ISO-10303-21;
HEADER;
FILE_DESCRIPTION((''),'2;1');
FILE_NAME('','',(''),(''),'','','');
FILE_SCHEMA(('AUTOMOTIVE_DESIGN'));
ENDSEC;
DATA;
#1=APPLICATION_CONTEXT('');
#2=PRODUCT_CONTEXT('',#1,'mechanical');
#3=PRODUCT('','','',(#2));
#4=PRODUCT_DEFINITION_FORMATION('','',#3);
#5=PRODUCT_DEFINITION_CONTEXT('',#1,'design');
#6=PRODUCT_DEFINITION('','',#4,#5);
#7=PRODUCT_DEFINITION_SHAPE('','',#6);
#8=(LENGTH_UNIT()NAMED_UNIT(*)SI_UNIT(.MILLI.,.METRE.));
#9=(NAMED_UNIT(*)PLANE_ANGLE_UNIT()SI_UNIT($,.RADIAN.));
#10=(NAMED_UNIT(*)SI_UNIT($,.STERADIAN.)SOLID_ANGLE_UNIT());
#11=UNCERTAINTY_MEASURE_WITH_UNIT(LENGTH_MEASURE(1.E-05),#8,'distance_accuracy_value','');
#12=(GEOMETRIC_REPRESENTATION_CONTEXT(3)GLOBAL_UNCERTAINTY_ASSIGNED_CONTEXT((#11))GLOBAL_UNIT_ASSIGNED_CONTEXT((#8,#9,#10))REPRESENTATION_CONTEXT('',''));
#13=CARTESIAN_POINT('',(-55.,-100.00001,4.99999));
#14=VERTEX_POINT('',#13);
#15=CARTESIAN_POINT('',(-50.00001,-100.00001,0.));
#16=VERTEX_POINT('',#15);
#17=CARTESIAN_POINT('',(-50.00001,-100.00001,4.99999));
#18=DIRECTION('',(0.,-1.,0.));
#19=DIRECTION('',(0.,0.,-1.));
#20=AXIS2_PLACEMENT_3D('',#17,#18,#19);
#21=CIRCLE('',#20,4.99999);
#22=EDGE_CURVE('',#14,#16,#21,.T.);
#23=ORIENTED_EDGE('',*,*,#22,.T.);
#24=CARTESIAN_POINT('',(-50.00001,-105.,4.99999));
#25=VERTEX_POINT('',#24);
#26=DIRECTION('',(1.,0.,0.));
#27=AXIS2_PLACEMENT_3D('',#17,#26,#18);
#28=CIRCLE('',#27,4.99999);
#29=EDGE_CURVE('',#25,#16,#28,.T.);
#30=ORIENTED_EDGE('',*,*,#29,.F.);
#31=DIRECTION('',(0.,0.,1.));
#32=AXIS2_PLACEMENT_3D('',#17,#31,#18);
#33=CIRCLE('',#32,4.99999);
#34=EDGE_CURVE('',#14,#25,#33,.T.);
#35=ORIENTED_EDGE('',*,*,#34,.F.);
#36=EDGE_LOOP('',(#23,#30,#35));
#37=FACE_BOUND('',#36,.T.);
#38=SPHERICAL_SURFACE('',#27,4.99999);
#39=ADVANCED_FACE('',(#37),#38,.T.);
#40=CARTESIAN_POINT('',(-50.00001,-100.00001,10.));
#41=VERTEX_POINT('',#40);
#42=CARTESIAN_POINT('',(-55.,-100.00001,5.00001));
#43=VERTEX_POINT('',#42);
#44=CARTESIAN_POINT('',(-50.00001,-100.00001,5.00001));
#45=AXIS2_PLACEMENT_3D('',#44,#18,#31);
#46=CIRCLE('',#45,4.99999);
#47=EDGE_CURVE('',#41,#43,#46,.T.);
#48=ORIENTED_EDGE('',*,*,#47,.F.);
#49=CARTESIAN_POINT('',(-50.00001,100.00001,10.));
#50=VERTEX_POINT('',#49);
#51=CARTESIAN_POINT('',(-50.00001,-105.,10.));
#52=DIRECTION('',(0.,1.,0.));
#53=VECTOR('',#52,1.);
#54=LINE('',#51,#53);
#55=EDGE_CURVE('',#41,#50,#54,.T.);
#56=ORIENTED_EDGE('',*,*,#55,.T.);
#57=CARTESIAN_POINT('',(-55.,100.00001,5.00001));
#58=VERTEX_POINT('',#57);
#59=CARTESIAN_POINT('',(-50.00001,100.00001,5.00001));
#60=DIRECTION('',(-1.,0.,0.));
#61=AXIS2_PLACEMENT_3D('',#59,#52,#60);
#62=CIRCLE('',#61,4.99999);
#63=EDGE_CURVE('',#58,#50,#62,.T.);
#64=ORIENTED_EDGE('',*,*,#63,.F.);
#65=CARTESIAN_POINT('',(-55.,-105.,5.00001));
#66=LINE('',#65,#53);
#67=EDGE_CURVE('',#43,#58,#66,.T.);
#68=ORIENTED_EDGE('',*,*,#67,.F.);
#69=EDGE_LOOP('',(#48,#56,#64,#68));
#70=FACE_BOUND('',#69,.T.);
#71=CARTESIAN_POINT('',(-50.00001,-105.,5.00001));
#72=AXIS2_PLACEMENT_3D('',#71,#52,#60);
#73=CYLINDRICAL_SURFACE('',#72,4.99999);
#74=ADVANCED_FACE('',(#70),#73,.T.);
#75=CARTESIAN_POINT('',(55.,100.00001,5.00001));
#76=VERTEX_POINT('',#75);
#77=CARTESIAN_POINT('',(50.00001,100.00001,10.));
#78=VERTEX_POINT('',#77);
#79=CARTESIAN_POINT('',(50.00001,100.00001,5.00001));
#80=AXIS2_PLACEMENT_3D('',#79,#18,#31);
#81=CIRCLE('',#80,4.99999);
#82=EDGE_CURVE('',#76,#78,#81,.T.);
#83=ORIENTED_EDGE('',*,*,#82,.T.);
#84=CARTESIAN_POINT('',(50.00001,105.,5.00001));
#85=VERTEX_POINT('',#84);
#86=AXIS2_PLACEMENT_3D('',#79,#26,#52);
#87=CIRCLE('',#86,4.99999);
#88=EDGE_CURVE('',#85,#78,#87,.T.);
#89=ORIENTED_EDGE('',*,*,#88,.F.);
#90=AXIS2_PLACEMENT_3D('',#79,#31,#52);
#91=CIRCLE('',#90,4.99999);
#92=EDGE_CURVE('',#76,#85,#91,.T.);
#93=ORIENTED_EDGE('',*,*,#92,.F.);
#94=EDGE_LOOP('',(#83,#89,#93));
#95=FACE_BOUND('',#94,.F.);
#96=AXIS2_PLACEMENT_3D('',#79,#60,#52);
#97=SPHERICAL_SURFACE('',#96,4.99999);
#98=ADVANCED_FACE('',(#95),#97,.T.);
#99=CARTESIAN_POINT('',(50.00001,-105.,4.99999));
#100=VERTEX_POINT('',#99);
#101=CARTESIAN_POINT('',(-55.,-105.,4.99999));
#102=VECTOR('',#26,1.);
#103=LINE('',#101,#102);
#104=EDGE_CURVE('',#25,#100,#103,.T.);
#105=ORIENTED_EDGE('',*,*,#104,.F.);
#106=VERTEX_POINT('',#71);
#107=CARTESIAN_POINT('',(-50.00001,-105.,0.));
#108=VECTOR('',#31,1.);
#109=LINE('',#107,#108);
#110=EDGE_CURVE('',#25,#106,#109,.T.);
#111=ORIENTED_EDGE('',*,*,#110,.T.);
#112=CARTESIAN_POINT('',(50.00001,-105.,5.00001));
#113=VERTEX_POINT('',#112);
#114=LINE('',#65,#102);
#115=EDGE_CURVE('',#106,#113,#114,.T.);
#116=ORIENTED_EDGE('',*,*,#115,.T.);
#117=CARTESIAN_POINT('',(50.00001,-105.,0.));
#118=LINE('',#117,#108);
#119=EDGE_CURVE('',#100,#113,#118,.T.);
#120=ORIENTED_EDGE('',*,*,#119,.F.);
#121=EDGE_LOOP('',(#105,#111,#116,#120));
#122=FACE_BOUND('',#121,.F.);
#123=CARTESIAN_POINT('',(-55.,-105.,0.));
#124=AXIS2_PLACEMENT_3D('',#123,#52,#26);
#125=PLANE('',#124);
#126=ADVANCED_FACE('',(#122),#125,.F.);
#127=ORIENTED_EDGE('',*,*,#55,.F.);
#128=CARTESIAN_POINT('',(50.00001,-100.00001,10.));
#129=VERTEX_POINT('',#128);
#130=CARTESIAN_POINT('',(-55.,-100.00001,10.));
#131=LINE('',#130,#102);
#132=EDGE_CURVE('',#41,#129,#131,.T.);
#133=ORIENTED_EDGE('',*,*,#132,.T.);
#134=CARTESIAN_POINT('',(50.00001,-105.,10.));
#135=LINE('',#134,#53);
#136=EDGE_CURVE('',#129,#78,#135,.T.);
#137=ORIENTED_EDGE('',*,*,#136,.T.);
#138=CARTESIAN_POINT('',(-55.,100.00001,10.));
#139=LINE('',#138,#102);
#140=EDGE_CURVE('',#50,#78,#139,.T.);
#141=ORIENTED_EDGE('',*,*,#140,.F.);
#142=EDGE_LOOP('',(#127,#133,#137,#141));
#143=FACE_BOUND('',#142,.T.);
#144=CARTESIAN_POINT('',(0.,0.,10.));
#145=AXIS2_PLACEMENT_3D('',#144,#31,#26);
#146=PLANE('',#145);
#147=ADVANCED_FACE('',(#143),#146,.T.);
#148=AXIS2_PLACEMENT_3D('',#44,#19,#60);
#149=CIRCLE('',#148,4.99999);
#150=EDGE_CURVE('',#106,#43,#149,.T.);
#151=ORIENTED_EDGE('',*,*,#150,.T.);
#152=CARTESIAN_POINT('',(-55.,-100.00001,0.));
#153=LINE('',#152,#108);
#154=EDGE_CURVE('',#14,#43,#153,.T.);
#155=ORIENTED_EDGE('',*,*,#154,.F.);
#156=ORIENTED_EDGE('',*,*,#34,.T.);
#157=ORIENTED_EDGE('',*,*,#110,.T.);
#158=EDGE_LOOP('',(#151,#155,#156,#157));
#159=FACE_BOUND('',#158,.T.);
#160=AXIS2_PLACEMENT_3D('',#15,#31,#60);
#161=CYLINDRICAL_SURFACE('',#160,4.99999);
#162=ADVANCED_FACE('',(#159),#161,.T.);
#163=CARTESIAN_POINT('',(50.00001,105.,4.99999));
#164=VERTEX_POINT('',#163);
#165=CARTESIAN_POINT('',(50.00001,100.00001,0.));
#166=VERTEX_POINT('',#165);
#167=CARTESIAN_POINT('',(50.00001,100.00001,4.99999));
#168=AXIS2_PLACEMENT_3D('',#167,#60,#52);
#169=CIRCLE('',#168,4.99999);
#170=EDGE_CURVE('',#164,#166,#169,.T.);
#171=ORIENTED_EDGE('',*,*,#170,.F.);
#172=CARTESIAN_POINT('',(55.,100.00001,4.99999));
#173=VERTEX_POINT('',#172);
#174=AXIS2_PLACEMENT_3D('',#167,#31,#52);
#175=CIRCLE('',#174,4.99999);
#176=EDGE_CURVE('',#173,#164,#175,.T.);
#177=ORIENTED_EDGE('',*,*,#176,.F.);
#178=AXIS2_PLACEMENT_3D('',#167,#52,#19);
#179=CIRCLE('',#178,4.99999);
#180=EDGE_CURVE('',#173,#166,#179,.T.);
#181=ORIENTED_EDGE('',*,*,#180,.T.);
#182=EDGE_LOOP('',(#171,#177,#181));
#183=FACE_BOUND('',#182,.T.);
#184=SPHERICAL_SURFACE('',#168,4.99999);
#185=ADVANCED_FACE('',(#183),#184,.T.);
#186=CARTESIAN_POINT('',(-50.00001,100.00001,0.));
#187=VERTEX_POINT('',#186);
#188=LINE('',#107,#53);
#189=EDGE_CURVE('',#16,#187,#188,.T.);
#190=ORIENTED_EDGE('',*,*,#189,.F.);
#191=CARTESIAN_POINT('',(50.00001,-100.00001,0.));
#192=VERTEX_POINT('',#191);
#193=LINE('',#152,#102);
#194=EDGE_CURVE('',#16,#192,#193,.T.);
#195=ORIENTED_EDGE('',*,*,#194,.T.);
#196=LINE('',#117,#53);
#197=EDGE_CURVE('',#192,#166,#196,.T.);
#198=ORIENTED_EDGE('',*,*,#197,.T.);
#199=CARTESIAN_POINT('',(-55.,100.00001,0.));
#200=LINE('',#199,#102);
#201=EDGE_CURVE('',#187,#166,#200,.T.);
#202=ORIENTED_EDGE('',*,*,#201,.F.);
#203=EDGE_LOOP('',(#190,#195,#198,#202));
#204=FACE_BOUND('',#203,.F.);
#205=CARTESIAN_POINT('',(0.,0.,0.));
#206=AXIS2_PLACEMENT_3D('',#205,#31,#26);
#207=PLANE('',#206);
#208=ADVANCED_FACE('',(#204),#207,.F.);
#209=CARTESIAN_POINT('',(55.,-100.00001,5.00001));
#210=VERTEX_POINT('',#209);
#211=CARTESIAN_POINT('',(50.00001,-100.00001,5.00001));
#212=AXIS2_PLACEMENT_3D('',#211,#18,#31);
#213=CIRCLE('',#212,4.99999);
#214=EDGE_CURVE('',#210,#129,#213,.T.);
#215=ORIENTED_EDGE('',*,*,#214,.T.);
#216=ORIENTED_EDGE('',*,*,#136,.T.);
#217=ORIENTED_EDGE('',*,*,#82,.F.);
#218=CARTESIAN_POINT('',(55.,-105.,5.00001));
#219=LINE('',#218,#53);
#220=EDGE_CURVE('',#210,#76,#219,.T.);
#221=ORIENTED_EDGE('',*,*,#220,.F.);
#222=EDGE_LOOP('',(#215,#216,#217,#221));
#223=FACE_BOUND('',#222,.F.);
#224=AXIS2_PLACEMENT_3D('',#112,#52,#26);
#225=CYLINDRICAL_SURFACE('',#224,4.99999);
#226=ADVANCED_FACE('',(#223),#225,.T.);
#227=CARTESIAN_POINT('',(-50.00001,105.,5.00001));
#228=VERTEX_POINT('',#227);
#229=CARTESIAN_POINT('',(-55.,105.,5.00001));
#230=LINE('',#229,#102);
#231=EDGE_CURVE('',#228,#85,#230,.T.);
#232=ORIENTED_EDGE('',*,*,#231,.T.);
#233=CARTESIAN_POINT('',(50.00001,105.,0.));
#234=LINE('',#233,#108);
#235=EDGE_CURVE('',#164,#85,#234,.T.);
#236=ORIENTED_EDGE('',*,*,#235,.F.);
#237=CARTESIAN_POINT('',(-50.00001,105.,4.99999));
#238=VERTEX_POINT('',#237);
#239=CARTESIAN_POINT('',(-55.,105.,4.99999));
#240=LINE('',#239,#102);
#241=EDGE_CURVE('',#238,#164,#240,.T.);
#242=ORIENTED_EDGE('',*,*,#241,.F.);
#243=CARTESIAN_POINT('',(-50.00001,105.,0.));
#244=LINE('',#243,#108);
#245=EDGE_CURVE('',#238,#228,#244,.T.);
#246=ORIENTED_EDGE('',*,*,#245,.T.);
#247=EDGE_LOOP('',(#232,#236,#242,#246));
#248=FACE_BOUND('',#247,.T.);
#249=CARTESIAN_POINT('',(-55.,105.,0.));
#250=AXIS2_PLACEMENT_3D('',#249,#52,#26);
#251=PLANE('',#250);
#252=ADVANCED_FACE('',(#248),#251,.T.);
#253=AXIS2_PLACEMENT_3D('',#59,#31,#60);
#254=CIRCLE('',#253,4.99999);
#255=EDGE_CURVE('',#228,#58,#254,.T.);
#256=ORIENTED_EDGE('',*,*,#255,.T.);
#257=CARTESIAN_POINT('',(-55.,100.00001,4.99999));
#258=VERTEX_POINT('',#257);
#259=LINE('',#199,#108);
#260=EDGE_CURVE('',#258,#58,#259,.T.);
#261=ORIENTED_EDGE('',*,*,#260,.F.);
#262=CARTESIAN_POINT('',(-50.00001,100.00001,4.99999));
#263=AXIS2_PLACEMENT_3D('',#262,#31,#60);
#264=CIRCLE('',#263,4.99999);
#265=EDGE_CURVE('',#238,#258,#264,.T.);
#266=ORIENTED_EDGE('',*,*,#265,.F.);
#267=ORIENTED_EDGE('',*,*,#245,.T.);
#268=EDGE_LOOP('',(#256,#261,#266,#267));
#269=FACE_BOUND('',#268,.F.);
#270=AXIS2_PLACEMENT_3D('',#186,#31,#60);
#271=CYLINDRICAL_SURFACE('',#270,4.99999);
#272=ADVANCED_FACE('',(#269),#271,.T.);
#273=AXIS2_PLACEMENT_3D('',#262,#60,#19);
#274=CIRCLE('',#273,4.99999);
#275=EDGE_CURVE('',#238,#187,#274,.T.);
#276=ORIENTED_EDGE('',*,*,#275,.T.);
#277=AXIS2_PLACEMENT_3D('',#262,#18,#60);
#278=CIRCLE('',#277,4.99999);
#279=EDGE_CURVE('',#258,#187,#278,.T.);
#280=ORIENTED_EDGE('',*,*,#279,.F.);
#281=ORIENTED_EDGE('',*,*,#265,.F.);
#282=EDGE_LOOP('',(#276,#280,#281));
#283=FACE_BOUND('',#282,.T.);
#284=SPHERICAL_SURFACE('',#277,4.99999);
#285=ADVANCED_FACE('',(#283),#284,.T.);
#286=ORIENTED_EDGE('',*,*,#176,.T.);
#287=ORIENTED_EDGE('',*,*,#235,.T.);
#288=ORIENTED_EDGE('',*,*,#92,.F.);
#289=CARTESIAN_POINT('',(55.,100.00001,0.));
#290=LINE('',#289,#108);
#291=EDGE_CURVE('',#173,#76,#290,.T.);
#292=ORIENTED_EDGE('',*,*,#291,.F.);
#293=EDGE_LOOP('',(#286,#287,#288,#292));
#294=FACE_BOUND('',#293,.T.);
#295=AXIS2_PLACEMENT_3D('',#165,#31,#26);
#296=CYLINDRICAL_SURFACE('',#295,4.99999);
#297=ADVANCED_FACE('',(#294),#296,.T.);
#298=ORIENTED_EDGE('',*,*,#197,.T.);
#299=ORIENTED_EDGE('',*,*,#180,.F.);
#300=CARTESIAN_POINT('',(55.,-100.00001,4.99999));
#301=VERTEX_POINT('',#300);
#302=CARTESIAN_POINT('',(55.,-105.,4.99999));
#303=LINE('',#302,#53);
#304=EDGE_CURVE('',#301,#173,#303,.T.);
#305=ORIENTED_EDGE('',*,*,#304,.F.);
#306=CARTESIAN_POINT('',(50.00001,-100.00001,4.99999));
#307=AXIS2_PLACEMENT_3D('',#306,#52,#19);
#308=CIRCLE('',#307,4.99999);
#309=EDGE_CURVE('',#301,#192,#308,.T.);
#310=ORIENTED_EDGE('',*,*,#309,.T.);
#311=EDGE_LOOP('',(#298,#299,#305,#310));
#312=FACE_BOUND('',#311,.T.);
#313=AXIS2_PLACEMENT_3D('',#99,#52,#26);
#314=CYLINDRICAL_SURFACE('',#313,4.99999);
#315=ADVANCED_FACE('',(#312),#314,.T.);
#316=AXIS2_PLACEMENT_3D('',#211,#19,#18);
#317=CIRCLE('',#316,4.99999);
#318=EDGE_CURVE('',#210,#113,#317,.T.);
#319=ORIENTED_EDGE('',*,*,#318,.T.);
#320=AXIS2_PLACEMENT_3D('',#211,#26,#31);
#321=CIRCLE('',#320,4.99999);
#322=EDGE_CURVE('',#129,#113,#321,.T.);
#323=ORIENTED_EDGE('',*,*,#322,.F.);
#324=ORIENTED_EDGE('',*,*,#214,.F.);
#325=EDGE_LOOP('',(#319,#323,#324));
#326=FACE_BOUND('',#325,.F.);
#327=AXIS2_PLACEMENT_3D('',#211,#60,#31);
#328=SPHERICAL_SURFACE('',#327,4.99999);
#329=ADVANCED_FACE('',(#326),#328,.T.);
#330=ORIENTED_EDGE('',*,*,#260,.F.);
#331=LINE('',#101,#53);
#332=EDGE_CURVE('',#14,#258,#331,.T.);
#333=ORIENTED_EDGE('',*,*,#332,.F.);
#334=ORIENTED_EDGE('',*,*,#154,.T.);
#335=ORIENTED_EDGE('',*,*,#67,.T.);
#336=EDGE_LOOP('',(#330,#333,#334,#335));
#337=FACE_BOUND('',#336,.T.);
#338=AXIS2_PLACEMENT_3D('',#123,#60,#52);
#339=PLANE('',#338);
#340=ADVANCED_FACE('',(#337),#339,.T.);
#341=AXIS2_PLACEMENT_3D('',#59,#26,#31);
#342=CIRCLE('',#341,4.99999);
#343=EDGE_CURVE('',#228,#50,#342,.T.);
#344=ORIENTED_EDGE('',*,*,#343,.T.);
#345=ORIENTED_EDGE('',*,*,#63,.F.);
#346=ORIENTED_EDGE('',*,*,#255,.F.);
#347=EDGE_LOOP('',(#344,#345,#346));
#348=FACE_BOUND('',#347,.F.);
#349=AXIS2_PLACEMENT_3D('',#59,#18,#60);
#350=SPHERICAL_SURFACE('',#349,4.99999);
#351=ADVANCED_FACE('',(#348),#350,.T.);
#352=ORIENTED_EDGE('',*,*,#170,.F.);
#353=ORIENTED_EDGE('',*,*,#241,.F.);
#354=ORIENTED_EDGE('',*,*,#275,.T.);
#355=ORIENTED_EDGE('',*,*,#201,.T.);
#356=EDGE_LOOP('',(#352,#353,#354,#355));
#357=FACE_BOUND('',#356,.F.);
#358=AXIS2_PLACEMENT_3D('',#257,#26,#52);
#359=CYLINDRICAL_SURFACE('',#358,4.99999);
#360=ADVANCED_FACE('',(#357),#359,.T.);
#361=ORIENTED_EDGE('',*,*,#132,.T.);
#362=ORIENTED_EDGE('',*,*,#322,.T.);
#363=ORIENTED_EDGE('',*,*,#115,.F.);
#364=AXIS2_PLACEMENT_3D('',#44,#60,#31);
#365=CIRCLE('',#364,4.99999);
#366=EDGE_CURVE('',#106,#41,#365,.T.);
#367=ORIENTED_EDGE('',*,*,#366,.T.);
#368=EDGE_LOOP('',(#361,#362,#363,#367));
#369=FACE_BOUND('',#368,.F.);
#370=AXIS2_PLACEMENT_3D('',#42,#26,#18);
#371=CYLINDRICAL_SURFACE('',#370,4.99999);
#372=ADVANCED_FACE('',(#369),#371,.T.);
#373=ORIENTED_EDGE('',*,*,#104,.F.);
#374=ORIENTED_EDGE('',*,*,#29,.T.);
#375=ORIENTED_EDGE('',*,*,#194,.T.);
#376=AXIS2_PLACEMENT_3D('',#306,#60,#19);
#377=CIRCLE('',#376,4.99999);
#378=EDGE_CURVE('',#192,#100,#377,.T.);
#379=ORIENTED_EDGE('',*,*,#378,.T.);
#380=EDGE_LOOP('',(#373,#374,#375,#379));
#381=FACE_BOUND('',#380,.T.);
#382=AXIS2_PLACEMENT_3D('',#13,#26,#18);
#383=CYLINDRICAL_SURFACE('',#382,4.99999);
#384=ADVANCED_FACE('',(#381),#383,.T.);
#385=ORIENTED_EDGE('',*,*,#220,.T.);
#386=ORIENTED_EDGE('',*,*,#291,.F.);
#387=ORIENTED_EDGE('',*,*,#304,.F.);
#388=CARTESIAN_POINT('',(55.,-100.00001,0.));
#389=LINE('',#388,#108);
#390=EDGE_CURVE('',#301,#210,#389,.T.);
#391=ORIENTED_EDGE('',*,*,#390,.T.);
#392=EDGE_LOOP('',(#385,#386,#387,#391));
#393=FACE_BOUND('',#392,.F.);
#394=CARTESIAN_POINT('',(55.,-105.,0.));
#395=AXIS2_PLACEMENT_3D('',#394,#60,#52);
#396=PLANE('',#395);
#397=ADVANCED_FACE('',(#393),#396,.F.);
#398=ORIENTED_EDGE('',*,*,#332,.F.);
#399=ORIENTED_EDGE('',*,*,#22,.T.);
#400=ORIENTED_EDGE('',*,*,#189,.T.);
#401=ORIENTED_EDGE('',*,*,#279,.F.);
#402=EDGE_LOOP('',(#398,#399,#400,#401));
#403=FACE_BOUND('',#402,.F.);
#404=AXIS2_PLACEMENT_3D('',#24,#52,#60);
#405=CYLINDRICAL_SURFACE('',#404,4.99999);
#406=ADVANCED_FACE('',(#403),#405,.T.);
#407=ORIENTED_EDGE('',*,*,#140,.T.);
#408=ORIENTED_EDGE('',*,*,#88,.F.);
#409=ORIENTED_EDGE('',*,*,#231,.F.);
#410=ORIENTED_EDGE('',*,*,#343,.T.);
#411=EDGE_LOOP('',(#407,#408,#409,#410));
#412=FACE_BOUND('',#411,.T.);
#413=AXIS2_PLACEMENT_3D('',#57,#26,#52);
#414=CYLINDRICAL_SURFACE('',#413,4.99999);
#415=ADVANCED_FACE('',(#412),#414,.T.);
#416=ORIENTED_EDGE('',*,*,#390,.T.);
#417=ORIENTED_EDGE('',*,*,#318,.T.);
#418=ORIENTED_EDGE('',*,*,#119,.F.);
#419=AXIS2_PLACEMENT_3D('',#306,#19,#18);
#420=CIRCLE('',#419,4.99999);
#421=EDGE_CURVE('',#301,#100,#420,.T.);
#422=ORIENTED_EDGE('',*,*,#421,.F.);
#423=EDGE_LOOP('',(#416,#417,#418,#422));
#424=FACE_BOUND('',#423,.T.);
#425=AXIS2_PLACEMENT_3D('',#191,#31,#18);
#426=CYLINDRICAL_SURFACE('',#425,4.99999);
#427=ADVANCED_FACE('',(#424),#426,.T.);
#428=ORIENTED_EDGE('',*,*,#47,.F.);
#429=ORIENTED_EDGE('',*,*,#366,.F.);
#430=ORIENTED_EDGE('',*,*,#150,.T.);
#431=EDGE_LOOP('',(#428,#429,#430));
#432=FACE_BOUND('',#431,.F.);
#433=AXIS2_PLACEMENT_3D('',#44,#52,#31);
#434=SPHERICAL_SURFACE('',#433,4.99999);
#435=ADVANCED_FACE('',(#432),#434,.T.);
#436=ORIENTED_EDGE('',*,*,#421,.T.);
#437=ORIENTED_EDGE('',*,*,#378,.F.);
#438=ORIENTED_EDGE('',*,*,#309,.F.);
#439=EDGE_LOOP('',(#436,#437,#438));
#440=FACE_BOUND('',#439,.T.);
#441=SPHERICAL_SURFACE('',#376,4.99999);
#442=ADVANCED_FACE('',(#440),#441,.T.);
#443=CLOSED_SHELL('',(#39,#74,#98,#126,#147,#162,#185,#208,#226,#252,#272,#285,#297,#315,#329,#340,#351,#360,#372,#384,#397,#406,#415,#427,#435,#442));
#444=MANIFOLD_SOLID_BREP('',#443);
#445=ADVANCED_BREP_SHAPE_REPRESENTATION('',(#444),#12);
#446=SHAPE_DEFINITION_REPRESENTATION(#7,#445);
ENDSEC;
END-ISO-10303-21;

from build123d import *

# Parameters (mm, degrees)
F0_W     = 110
F0_H     = 210
F1_DEPTH = 10
F2_R     = 4.99999


# Not quite as in the source:
# - a fillet or chamfer is up to 0.001 mm smaller than in the source, because OpenCascade refuses the exact size


with BuildPart() as f1:
    # F0 (on Top) → F1 (new body)
    with BuildSketch(Plane.XY):
        Rectangle(F0_W, F0_H)
    extrude(amount=F1_DEPTH)

    # F2 (radius 5 in the source; OpenCascade refuses exactly that, so slightly less here)
    f2_edges = [f1.edges().sort_by_distance(p)[0] for p in [
        (-55, 0, 10),
        (0, -105, 10),
        (0, -105, 0),
        (-55, -105, 5),
        (-55, 0, 0),
        (-55, 105, 5),
        (0, 105, 10),
        (0, 105, 0),
        (55, 105, 5),
        (55, 0, 10),
        (55, 0, 0),
        (55, -105, 5),
    ]]
    fillet(f2_edges, radius=F2_R)


solid = f1.part
